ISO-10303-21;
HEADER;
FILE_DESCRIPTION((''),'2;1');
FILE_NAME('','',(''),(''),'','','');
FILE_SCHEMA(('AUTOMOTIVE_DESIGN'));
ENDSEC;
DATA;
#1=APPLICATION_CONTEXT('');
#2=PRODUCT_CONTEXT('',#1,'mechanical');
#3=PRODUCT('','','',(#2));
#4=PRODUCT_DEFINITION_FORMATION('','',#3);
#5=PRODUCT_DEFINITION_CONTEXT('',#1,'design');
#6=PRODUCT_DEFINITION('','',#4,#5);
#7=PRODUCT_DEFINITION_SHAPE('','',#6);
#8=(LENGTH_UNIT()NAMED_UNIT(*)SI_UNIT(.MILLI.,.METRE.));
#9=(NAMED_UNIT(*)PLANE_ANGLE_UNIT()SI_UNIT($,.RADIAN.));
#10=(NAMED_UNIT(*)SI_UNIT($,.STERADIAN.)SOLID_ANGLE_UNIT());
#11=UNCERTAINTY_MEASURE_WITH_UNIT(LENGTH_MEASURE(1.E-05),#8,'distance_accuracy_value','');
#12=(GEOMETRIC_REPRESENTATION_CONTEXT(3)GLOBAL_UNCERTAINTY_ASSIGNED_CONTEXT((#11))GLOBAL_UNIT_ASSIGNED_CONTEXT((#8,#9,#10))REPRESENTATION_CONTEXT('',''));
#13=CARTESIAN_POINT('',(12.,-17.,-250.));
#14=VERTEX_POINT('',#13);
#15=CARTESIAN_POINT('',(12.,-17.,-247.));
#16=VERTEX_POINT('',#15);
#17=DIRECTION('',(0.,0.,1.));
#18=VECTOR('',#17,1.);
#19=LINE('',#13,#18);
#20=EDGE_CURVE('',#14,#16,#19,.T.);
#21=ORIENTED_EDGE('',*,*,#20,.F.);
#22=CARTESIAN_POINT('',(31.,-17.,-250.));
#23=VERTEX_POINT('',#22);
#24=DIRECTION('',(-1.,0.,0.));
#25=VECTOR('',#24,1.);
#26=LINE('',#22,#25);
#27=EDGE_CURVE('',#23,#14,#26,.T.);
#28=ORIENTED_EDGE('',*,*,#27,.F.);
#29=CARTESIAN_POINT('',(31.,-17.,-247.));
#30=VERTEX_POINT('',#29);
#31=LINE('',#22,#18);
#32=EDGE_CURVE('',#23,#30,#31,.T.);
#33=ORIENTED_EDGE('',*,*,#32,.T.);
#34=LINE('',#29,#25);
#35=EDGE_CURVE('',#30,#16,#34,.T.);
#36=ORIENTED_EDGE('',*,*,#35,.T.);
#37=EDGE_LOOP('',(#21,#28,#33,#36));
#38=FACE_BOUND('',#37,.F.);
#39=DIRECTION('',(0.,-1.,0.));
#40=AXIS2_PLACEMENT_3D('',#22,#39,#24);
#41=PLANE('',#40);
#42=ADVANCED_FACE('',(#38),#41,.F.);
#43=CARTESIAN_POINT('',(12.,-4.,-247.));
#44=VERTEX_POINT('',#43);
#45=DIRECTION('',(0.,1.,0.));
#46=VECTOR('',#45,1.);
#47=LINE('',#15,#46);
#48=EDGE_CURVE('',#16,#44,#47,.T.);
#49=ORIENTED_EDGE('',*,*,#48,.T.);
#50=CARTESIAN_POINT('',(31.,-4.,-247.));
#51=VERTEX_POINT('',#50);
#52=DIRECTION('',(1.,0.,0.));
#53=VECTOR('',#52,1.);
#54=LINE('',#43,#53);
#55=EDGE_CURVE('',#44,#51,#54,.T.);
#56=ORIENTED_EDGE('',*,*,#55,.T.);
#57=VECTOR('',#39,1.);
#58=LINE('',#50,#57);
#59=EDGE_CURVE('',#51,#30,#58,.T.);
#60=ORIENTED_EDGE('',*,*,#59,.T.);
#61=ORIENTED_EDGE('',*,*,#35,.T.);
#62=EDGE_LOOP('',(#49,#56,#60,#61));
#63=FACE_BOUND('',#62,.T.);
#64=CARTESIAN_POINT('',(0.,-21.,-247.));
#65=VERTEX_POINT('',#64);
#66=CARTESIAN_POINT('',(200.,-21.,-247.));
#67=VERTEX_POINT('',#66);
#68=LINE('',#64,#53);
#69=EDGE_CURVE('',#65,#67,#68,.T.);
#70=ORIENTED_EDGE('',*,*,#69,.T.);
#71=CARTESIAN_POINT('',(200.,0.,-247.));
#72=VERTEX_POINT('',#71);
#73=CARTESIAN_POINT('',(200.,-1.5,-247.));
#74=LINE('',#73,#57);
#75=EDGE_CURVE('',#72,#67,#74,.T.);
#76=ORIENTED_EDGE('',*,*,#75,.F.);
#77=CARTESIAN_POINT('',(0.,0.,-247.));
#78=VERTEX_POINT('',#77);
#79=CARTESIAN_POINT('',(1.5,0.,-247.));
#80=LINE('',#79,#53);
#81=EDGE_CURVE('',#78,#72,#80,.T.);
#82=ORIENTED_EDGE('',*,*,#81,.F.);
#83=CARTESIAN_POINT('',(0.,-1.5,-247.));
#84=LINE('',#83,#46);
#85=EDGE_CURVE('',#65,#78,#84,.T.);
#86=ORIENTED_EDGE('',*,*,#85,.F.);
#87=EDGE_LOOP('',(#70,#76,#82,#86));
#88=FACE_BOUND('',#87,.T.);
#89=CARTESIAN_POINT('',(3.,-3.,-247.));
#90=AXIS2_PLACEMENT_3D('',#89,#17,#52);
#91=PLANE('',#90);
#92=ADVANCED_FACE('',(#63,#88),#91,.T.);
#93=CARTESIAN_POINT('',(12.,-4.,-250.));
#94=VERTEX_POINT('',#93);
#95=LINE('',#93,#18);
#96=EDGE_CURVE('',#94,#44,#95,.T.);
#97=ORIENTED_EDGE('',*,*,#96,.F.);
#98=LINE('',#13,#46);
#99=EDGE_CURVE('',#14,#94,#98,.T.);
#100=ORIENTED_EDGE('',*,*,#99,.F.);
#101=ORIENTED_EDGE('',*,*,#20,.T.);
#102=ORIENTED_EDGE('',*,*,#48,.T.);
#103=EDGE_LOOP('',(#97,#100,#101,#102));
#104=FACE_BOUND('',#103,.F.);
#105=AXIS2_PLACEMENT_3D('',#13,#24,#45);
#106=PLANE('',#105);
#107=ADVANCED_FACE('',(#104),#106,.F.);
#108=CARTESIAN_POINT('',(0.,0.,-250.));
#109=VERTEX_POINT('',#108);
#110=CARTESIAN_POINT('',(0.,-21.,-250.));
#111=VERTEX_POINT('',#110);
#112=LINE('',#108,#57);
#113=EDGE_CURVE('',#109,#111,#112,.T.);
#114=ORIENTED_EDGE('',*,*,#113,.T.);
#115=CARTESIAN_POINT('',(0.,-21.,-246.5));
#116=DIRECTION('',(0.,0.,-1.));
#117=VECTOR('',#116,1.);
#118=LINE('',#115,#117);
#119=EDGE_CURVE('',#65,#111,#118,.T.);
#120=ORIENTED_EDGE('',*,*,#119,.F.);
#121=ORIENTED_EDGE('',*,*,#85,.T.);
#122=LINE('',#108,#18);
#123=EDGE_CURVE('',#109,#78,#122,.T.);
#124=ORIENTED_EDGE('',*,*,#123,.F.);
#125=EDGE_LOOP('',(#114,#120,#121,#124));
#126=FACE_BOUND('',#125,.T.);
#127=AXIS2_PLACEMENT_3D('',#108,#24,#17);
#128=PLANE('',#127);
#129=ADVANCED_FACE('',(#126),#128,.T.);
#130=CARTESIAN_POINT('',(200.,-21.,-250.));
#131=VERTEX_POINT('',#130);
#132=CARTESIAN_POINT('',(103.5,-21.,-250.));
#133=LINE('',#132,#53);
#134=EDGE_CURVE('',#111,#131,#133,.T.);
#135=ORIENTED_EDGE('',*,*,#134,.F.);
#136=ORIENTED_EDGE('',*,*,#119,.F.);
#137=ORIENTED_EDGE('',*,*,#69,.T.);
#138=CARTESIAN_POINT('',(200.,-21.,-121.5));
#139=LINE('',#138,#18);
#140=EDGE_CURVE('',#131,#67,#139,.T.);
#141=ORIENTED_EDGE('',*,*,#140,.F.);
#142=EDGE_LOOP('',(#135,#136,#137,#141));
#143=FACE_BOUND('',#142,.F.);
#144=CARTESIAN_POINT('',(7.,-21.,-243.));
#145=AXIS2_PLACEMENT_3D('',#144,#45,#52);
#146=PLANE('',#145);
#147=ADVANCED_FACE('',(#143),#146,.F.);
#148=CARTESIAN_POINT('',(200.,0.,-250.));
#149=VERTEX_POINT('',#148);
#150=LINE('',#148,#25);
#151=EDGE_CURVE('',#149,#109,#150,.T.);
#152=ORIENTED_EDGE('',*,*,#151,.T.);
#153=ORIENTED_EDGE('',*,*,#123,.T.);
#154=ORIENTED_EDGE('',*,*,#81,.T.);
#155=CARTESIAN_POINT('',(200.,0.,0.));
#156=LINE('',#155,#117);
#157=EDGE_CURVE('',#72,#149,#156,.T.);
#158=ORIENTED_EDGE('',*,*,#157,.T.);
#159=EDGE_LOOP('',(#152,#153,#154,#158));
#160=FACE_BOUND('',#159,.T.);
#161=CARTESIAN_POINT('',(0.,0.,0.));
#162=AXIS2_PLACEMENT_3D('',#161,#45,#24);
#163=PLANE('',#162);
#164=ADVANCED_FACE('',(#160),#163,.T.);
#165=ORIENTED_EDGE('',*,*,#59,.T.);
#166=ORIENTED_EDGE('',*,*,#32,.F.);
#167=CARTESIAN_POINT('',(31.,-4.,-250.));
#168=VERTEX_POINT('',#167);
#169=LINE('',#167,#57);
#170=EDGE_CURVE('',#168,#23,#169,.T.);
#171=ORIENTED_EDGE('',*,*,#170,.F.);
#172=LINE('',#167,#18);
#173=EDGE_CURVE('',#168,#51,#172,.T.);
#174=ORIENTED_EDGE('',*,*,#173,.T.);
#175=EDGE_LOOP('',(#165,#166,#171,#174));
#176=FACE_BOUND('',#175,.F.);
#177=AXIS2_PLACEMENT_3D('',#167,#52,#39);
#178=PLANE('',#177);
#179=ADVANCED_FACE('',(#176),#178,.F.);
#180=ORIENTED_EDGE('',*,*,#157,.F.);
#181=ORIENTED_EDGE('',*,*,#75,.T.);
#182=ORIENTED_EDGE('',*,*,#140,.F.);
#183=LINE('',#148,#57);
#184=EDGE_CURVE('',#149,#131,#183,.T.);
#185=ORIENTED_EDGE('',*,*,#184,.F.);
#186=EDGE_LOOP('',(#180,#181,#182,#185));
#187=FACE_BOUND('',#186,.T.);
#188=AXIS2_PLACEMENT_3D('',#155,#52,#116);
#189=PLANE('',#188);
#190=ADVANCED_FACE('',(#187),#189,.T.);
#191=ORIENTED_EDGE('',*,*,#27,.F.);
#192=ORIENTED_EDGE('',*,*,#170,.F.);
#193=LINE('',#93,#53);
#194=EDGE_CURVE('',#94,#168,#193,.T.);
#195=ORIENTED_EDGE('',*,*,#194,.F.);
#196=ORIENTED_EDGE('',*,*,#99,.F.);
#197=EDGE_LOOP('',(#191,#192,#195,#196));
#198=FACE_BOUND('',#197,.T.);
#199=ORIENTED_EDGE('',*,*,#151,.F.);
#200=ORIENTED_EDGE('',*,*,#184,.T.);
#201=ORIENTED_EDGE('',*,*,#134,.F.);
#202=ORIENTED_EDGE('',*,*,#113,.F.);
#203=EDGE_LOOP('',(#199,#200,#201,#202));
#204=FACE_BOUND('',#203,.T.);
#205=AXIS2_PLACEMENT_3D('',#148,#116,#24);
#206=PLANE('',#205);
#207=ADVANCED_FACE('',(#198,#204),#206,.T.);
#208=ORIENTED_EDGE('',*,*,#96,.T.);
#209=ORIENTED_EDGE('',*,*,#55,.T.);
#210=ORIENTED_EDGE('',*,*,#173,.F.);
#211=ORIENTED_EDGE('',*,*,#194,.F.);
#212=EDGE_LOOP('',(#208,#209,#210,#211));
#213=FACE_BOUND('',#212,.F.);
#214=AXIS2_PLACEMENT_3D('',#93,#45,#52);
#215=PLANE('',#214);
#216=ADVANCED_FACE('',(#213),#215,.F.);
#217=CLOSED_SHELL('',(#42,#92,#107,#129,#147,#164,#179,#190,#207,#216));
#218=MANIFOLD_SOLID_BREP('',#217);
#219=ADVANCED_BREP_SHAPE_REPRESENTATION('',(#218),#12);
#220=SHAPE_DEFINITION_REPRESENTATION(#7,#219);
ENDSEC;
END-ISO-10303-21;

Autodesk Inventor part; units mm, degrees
ref_plane "YZ Plane" through (0, 0, 0) normal (1, 0, 0) x (0, 1, 0)
ref_plane "XZ Plane" through (0, 0, 0) normal (0, 1, 0) x (-1, 0, 0)
ref_plane "XY Plane" through (0, 0, 0) normal (0, 0, 1) x (1, 0, 0)
sketch "block" plane through (0, 0, 0) normal (0, 1, 0) x (-1, 0, 0)
  line L0 (0, 0) -> (-200, 0)
  line L1 (-200, 0) -> (-200, -250)
  line L2 (-200, -250) -> (0, -250)
  line L3 (0, -250) -> (0, 0)
  dimension "d31" = 200
  dimension "d32" = 250
extrude "ext_block" add sketch "block" against normal blind 24
shell "Shell2" thickness 3 removed faces 0
sketch "lines_base" plane through (0, 0, 0) normal (0, 1, 0) x (-1, 0, 0)
  line L0 (0, 0) -> (-200, 0)
  line L1 (-200, 0) -> (-200, -250)
  line L2 (-200, -250) -> (0, -250)
  line L3 (0, -250) -> (0, 0)
  circle A0 centre (-65, -60) radius 6
  circle A1 centre (-125, -80) radius 6
  circle A2 centre (-65, -60) radius 12.5
  circle A3 centre (-65, -60) radius 8.5
  circle A4 centre (-125, -80) radius 8.5
  circle A5 centre (-125, -80) radius 12.5
  circle A6 centre (-175, -125) radius 3
  line L4 (-175, -125) -> (-175, -209)
  line L5 (-175, -125) -> (-91, -125) construction
  circle A7 centre (-175, -139) radius 3
  circle A8 centre (-175, -153) radius 3
  circle A9 centre (-175, -167) radius 3
  circle A10 centre (-175, -181) radius 3
  circle A11 centre (-175, -195) radius 3
  circle A12 centre (-175, -209) radius 3
  circle A13 centre (-95, -185) radius 2.5
  circle A14 centre (-95, -185) radius 5
  point P0 (-200, -125)
  dimension "d0" = 200
  dimension "d1" = 250
  dimension "d2" = 12
  dimension "d3" = 12
  dimension "d4" = 25
  dimension "d5" = 17
  dimension "d6" = 17
  dimension "d7" = 25
  dimension "d8" = 75
  dimension "d9" = 80
  dimension "d10" = 65
  dimension "d11" = 60
  dimension "d12" = 6
  dimension "d13" = 84
  dimension "d14" = 90
  dimension "d15" = 25
  dimension "d16" = 125
  dimension "d19" = 14
  dimension "d24" = 5
  dimension "d25" = 10
  dimension "d26" = 65
  dimension "d27" = 95
extrude "holes" cut sketch "lines_base" against normal up to surface (3 mm away) contours A0 | A1 | A6 | A7 L4 | L4 A7 | A8 L4 | L4 A8 | A9 L4 | L4 A9 | A10 L4 | L4 A10 | A11 L4 | L4 A11 | A12 | A13
sketch "Sketch4" plane through (200, 0, -250) normal (0, 0, -1) x (-1, 0, 0)
  line L0 (188, -4) -> (169, -4)
  line L1 (169, -4) -> (169, -17)
  line L2 (169, -17) -> (188, -17)
  line L3 (188, -17) -> (188, -4)
  line L4 (0, 0) -> (200, 0) projected
  line L5 (200, 0) -> (200, -24) projected
  dimension "d40" = 19
  dimension "d41" = 13
  dimension "d42" = 4
  dimension "d43" = 12
extrude "pwr_button_hole" cut sketch "Sketch4" against normal up to surface (3 mm away)
ref_plane "Work Plane1" through (7, -21, -243) normal (0, 1, 0) x (1, 0, 0)
sketch "Sketch5" plane through (7, -21, -243) normal (0, 1, 0) x (1, 0, 0)
  line L0 (-20.9366, 21.7948) -> (229.9216, 21.7948)
  line L1 (229.9216, 21.7948) -> (229.9216, -260.9184)
  line L2 (229.9216, -260.9184) -> (-20.9366, -260.9184)
  line L3 (-20.9366, -260.9184) -> (-20.9366, 21.7948)
  point P0 (-7, -243)
extrude "back_cover_cut" cut sketch "Sketch5" against normal through all
sketch "Sketch9" plane through (3, -3, -247) normal (0, 0, 1) x (1, 0, 0)
  line L0 (-37.3239, 25.5636) -> (215.9348, 25.5636)
  line L1 (215.9348, 25.5636) -> (215.9348, -44.9988)
  line L2 (215.9348, -44.9988) -> (-37.3239, -44.9988)
  line L3 (-37.3239, -44.9988) -> (-37.3239, 25.5636)
  point P0 (-3, 3)
extrude "Extrusion8" cut sketch "Sketch9" along normal through all
properties part number "side_right" material "Glass"
